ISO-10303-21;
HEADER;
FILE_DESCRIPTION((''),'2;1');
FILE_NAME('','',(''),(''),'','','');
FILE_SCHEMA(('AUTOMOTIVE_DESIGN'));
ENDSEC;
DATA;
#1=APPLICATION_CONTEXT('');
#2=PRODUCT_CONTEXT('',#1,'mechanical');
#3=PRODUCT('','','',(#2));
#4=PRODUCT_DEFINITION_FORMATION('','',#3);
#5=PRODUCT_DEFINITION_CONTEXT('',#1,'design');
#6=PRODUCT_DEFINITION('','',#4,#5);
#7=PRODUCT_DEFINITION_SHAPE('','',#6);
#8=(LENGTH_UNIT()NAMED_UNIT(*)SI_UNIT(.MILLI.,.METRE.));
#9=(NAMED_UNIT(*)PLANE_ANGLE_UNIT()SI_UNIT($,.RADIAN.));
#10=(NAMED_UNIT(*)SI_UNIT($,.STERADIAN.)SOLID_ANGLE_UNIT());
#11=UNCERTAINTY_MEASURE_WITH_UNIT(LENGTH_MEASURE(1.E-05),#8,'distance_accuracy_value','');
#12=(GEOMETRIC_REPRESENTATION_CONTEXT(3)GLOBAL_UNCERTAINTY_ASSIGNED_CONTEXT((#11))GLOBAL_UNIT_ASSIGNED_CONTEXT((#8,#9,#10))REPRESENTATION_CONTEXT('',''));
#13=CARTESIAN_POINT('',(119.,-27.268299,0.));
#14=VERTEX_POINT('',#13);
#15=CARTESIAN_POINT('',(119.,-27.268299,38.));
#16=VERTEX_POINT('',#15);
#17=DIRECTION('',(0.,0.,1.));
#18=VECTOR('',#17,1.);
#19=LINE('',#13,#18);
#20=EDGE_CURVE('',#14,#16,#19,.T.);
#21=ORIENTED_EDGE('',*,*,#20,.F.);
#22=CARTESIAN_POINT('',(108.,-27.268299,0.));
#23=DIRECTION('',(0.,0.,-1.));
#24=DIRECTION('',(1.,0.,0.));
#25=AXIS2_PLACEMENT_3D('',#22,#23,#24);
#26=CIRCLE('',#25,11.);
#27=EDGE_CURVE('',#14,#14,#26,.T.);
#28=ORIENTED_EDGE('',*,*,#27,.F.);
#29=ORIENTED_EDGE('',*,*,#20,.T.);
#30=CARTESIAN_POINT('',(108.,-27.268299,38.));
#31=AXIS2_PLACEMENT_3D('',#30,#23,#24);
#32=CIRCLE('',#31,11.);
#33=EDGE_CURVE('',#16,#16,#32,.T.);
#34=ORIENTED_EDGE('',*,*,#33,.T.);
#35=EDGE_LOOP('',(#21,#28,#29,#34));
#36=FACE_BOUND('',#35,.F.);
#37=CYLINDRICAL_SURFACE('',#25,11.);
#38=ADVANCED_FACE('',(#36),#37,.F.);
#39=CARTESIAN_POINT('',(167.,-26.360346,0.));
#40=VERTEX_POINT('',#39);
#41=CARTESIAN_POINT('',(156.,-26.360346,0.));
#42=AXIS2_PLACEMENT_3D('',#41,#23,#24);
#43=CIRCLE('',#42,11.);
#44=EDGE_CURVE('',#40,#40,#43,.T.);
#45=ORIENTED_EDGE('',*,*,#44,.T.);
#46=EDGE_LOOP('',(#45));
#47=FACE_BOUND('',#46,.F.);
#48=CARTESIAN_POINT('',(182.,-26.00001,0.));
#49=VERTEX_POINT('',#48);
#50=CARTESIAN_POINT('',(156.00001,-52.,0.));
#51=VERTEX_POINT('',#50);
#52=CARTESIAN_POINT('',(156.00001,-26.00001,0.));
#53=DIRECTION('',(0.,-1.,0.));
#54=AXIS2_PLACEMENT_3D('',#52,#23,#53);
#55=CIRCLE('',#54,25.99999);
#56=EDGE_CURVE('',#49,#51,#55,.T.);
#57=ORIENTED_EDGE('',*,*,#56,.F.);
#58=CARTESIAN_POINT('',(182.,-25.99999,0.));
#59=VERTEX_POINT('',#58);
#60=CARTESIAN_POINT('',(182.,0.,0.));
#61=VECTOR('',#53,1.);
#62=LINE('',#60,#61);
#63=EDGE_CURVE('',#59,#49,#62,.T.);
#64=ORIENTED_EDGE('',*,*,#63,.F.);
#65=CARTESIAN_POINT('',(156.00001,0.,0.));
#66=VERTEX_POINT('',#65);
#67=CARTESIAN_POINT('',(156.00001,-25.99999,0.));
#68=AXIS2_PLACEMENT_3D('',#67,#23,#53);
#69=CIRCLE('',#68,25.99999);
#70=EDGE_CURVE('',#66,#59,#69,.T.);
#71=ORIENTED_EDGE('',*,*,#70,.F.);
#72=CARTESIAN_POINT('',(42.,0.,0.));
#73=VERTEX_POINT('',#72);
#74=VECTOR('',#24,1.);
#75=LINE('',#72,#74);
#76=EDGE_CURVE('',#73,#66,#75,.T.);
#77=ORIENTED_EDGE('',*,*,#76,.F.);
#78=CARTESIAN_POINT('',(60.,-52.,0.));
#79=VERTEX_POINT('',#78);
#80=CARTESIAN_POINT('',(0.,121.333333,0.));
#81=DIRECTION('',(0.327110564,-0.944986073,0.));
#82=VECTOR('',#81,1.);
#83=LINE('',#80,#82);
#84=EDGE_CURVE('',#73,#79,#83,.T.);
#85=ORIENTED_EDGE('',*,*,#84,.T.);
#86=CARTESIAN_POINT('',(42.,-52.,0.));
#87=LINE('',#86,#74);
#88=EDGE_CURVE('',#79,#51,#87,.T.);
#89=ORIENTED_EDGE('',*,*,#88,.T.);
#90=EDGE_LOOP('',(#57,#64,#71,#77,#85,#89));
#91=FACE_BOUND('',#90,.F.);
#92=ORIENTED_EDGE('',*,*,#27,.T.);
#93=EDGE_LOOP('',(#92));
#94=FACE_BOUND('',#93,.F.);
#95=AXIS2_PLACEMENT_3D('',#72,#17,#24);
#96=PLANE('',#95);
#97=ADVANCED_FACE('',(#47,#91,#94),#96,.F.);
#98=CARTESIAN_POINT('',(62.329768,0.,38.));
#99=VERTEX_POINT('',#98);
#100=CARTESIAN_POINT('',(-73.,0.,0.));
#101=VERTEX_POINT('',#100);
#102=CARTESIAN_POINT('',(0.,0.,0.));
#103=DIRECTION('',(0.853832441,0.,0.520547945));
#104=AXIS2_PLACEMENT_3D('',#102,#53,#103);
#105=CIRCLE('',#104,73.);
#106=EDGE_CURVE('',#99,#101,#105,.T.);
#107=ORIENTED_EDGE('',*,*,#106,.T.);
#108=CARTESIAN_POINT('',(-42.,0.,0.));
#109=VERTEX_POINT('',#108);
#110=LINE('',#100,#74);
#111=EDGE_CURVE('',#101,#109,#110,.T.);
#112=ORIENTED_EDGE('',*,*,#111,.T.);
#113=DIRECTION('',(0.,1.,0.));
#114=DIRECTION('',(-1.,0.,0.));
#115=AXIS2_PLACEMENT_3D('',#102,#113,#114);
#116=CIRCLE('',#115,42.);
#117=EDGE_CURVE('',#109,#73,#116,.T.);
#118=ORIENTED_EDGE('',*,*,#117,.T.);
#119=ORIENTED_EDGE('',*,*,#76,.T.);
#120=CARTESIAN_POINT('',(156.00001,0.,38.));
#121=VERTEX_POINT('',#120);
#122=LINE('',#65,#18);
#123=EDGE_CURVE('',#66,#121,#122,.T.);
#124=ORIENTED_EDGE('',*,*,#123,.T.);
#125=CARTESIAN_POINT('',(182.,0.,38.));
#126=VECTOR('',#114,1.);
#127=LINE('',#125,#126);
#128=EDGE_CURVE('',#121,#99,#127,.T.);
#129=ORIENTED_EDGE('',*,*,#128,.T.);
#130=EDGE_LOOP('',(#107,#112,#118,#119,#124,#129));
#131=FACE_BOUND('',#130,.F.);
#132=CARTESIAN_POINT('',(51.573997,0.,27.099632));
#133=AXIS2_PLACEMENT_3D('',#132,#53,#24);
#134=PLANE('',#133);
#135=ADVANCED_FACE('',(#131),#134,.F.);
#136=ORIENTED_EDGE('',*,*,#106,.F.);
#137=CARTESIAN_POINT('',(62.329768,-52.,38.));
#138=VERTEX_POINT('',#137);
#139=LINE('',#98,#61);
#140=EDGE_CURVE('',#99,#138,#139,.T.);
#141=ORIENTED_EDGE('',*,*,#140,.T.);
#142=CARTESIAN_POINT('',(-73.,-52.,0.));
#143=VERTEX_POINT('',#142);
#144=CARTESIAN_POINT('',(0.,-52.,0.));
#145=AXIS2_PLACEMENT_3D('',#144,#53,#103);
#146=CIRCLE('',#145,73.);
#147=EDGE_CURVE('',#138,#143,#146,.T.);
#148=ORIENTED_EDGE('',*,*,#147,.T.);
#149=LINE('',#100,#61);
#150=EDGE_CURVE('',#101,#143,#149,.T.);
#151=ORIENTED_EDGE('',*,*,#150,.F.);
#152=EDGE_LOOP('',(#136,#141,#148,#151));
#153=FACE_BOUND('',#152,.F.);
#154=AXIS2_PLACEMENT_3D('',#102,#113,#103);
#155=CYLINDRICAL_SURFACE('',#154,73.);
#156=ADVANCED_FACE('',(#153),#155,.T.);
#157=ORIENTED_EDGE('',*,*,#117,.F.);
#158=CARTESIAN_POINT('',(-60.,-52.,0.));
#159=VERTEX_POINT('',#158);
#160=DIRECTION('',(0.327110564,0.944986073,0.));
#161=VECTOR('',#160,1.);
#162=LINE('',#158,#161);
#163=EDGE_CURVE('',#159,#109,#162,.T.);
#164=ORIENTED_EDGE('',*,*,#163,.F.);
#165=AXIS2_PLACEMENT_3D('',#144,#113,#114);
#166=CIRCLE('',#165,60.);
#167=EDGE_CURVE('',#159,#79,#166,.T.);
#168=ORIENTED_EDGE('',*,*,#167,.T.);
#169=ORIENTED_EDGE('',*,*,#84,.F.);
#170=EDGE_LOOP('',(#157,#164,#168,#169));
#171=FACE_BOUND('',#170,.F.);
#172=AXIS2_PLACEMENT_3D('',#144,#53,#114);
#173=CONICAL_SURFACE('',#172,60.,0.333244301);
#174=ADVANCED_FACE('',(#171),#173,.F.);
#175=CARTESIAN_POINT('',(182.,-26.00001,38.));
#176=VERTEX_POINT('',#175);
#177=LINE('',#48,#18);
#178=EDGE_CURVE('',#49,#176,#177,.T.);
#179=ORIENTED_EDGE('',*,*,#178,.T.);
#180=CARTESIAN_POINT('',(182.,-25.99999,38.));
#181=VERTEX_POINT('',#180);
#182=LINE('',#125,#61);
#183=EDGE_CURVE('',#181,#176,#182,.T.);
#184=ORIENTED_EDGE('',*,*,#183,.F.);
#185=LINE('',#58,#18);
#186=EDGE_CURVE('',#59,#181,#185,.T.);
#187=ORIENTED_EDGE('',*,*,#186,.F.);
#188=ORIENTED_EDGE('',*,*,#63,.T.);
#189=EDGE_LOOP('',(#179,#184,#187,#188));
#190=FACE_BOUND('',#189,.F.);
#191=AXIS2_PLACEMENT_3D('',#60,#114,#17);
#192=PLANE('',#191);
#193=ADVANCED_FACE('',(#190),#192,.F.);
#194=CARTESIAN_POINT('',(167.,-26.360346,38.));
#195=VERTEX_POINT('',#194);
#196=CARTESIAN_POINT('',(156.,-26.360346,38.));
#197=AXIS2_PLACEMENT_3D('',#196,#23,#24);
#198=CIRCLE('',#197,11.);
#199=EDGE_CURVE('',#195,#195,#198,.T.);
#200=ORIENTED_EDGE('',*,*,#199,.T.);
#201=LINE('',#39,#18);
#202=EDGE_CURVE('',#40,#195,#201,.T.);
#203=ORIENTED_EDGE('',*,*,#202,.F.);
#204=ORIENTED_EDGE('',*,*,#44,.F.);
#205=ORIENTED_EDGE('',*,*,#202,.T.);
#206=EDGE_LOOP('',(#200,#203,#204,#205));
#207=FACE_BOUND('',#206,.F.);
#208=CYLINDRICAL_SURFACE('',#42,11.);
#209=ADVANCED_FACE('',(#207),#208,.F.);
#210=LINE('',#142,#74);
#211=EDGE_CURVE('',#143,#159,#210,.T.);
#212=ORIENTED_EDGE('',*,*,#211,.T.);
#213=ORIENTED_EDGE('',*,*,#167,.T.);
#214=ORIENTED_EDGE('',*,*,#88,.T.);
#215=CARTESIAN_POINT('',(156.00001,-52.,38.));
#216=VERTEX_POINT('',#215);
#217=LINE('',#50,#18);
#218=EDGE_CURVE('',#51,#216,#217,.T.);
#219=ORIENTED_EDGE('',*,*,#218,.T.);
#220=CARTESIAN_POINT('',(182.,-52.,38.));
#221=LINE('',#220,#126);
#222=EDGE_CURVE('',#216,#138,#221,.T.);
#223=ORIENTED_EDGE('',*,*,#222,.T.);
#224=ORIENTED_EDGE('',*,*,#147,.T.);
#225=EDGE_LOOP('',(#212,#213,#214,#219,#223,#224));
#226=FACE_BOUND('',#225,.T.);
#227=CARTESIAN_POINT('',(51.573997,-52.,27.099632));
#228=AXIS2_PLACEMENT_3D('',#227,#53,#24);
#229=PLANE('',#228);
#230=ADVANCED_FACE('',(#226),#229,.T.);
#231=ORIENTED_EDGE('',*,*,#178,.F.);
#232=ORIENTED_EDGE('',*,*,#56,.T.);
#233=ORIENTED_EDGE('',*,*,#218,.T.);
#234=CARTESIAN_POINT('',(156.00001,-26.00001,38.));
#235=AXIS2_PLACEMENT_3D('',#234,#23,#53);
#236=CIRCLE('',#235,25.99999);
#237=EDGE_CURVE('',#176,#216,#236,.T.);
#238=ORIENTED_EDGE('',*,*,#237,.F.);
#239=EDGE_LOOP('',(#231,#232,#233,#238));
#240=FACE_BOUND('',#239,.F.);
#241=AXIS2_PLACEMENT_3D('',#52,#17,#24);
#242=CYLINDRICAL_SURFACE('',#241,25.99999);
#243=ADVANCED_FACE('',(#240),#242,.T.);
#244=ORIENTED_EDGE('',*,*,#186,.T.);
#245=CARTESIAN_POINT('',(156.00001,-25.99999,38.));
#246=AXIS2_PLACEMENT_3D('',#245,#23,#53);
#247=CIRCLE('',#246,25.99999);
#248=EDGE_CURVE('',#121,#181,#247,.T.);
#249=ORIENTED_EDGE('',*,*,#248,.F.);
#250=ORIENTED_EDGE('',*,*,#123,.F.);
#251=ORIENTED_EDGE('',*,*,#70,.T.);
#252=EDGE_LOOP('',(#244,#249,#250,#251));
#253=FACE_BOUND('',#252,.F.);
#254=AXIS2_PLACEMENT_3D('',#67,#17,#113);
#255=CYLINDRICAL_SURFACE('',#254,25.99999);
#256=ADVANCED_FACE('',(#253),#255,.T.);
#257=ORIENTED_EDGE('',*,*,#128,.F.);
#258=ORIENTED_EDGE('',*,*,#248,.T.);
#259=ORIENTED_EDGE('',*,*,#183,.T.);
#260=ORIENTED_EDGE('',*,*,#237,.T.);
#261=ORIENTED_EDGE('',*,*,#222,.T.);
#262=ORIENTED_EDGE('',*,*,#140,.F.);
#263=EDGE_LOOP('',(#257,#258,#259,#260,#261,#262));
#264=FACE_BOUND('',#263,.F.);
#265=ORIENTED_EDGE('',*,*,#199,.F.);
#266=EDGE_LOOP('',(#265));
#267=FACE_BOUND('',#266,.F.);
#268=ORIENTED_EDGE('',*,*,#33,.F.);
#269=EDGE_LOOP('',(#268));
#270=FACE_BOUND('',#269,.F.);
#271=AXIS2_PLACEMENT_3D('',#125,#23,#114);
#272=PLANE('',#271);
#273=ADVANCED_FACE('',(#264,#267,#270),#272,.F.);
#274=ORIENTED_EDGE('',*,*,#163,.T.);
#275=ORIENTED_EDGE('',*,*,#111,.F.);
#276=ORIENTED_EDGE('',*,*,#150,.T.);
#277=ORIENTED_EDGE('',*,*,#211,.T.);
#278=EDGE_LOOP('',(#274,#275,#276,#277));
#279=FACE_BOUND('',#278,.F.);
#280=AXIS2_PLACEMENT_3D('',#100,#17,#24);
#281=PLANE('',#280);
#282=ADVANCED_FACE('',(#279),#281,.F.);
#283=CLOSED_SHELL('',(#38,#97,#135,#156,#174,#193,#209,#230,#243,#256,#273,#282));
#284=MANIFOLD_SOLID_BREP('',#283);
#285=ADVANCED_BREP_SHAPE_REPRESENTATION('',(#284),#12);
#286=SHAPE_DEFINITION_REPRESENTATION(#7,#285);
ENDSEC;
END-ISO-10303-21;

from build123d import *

# Parameters (mm, degrees)
F1_DEPTH = 52
F5_R     = 11
F6_DEPTH = 50
F7_R     = 25.99999


# Not quite as in the source:
# - a fillet or chamfer is up to 0.001 mm smaller than in the source, because OpenCascade refuses the exact size


with BuildPart() as f1:
    # F0 (on Front) → F1 (new body)
    with BuildSketch(Plane.XZ):
        with BuildLine():
            ThreePointArc((-42, 0), (0, 42), (42, 0))
            Line((42, 0), (73, 0))
            Line((73, 0), (182, 0))
            Line((182, 0), (182, 38))
            Line((182, 38), (62.329768169, 38))
            ThreePointArc((62.329768169, 38), (-19.7348286497, 70.2818364741), (-73, 0))
            Line((-73, 0), (-42, 0))
        make_face()
    extrude(amount=F1_DEPTH)

    # F2 (on face) → F3 (revolve, cut)
    with BuildSketch(Plane(origin=(0, 0, 0), x_dir=(1, 0, 0), z_dir=(0, 0, -1))):
        Polygon((-42, 52), (-60, 52), (-42, 0), align=None)
    revolve(axis=Axis((0, -26.5927761793, 0), (0, 1, 0)), mode=Mode.SUBTRACT)

    # F5 (on face) → F6 (cut)
    with BuildSketch(Plane(origin=(0, 0, 0), x_dir=(1, 0, 0), z_dir=(0, 0, -1))):
        with Locations((156, 26.3603460044)):
            Circle(F5_R)
        with Locations((108, 27.2682987475)):
            Circle(F5_R)
    extrude(amount=-F6_DEPTH, mode=Mode.SUBTRACT)

    # F7 (radius 26 in the source; OpenCascade refuses exactly that, so slightly less here)
    f7_edges = [f1.edges().sort_by_distance(p)[0] for p in [
        (182, -52, 19),
        (182, 0, 19),
    ]]
    fillet(f7_edges, radius=F7_R)


solid = f1.part
